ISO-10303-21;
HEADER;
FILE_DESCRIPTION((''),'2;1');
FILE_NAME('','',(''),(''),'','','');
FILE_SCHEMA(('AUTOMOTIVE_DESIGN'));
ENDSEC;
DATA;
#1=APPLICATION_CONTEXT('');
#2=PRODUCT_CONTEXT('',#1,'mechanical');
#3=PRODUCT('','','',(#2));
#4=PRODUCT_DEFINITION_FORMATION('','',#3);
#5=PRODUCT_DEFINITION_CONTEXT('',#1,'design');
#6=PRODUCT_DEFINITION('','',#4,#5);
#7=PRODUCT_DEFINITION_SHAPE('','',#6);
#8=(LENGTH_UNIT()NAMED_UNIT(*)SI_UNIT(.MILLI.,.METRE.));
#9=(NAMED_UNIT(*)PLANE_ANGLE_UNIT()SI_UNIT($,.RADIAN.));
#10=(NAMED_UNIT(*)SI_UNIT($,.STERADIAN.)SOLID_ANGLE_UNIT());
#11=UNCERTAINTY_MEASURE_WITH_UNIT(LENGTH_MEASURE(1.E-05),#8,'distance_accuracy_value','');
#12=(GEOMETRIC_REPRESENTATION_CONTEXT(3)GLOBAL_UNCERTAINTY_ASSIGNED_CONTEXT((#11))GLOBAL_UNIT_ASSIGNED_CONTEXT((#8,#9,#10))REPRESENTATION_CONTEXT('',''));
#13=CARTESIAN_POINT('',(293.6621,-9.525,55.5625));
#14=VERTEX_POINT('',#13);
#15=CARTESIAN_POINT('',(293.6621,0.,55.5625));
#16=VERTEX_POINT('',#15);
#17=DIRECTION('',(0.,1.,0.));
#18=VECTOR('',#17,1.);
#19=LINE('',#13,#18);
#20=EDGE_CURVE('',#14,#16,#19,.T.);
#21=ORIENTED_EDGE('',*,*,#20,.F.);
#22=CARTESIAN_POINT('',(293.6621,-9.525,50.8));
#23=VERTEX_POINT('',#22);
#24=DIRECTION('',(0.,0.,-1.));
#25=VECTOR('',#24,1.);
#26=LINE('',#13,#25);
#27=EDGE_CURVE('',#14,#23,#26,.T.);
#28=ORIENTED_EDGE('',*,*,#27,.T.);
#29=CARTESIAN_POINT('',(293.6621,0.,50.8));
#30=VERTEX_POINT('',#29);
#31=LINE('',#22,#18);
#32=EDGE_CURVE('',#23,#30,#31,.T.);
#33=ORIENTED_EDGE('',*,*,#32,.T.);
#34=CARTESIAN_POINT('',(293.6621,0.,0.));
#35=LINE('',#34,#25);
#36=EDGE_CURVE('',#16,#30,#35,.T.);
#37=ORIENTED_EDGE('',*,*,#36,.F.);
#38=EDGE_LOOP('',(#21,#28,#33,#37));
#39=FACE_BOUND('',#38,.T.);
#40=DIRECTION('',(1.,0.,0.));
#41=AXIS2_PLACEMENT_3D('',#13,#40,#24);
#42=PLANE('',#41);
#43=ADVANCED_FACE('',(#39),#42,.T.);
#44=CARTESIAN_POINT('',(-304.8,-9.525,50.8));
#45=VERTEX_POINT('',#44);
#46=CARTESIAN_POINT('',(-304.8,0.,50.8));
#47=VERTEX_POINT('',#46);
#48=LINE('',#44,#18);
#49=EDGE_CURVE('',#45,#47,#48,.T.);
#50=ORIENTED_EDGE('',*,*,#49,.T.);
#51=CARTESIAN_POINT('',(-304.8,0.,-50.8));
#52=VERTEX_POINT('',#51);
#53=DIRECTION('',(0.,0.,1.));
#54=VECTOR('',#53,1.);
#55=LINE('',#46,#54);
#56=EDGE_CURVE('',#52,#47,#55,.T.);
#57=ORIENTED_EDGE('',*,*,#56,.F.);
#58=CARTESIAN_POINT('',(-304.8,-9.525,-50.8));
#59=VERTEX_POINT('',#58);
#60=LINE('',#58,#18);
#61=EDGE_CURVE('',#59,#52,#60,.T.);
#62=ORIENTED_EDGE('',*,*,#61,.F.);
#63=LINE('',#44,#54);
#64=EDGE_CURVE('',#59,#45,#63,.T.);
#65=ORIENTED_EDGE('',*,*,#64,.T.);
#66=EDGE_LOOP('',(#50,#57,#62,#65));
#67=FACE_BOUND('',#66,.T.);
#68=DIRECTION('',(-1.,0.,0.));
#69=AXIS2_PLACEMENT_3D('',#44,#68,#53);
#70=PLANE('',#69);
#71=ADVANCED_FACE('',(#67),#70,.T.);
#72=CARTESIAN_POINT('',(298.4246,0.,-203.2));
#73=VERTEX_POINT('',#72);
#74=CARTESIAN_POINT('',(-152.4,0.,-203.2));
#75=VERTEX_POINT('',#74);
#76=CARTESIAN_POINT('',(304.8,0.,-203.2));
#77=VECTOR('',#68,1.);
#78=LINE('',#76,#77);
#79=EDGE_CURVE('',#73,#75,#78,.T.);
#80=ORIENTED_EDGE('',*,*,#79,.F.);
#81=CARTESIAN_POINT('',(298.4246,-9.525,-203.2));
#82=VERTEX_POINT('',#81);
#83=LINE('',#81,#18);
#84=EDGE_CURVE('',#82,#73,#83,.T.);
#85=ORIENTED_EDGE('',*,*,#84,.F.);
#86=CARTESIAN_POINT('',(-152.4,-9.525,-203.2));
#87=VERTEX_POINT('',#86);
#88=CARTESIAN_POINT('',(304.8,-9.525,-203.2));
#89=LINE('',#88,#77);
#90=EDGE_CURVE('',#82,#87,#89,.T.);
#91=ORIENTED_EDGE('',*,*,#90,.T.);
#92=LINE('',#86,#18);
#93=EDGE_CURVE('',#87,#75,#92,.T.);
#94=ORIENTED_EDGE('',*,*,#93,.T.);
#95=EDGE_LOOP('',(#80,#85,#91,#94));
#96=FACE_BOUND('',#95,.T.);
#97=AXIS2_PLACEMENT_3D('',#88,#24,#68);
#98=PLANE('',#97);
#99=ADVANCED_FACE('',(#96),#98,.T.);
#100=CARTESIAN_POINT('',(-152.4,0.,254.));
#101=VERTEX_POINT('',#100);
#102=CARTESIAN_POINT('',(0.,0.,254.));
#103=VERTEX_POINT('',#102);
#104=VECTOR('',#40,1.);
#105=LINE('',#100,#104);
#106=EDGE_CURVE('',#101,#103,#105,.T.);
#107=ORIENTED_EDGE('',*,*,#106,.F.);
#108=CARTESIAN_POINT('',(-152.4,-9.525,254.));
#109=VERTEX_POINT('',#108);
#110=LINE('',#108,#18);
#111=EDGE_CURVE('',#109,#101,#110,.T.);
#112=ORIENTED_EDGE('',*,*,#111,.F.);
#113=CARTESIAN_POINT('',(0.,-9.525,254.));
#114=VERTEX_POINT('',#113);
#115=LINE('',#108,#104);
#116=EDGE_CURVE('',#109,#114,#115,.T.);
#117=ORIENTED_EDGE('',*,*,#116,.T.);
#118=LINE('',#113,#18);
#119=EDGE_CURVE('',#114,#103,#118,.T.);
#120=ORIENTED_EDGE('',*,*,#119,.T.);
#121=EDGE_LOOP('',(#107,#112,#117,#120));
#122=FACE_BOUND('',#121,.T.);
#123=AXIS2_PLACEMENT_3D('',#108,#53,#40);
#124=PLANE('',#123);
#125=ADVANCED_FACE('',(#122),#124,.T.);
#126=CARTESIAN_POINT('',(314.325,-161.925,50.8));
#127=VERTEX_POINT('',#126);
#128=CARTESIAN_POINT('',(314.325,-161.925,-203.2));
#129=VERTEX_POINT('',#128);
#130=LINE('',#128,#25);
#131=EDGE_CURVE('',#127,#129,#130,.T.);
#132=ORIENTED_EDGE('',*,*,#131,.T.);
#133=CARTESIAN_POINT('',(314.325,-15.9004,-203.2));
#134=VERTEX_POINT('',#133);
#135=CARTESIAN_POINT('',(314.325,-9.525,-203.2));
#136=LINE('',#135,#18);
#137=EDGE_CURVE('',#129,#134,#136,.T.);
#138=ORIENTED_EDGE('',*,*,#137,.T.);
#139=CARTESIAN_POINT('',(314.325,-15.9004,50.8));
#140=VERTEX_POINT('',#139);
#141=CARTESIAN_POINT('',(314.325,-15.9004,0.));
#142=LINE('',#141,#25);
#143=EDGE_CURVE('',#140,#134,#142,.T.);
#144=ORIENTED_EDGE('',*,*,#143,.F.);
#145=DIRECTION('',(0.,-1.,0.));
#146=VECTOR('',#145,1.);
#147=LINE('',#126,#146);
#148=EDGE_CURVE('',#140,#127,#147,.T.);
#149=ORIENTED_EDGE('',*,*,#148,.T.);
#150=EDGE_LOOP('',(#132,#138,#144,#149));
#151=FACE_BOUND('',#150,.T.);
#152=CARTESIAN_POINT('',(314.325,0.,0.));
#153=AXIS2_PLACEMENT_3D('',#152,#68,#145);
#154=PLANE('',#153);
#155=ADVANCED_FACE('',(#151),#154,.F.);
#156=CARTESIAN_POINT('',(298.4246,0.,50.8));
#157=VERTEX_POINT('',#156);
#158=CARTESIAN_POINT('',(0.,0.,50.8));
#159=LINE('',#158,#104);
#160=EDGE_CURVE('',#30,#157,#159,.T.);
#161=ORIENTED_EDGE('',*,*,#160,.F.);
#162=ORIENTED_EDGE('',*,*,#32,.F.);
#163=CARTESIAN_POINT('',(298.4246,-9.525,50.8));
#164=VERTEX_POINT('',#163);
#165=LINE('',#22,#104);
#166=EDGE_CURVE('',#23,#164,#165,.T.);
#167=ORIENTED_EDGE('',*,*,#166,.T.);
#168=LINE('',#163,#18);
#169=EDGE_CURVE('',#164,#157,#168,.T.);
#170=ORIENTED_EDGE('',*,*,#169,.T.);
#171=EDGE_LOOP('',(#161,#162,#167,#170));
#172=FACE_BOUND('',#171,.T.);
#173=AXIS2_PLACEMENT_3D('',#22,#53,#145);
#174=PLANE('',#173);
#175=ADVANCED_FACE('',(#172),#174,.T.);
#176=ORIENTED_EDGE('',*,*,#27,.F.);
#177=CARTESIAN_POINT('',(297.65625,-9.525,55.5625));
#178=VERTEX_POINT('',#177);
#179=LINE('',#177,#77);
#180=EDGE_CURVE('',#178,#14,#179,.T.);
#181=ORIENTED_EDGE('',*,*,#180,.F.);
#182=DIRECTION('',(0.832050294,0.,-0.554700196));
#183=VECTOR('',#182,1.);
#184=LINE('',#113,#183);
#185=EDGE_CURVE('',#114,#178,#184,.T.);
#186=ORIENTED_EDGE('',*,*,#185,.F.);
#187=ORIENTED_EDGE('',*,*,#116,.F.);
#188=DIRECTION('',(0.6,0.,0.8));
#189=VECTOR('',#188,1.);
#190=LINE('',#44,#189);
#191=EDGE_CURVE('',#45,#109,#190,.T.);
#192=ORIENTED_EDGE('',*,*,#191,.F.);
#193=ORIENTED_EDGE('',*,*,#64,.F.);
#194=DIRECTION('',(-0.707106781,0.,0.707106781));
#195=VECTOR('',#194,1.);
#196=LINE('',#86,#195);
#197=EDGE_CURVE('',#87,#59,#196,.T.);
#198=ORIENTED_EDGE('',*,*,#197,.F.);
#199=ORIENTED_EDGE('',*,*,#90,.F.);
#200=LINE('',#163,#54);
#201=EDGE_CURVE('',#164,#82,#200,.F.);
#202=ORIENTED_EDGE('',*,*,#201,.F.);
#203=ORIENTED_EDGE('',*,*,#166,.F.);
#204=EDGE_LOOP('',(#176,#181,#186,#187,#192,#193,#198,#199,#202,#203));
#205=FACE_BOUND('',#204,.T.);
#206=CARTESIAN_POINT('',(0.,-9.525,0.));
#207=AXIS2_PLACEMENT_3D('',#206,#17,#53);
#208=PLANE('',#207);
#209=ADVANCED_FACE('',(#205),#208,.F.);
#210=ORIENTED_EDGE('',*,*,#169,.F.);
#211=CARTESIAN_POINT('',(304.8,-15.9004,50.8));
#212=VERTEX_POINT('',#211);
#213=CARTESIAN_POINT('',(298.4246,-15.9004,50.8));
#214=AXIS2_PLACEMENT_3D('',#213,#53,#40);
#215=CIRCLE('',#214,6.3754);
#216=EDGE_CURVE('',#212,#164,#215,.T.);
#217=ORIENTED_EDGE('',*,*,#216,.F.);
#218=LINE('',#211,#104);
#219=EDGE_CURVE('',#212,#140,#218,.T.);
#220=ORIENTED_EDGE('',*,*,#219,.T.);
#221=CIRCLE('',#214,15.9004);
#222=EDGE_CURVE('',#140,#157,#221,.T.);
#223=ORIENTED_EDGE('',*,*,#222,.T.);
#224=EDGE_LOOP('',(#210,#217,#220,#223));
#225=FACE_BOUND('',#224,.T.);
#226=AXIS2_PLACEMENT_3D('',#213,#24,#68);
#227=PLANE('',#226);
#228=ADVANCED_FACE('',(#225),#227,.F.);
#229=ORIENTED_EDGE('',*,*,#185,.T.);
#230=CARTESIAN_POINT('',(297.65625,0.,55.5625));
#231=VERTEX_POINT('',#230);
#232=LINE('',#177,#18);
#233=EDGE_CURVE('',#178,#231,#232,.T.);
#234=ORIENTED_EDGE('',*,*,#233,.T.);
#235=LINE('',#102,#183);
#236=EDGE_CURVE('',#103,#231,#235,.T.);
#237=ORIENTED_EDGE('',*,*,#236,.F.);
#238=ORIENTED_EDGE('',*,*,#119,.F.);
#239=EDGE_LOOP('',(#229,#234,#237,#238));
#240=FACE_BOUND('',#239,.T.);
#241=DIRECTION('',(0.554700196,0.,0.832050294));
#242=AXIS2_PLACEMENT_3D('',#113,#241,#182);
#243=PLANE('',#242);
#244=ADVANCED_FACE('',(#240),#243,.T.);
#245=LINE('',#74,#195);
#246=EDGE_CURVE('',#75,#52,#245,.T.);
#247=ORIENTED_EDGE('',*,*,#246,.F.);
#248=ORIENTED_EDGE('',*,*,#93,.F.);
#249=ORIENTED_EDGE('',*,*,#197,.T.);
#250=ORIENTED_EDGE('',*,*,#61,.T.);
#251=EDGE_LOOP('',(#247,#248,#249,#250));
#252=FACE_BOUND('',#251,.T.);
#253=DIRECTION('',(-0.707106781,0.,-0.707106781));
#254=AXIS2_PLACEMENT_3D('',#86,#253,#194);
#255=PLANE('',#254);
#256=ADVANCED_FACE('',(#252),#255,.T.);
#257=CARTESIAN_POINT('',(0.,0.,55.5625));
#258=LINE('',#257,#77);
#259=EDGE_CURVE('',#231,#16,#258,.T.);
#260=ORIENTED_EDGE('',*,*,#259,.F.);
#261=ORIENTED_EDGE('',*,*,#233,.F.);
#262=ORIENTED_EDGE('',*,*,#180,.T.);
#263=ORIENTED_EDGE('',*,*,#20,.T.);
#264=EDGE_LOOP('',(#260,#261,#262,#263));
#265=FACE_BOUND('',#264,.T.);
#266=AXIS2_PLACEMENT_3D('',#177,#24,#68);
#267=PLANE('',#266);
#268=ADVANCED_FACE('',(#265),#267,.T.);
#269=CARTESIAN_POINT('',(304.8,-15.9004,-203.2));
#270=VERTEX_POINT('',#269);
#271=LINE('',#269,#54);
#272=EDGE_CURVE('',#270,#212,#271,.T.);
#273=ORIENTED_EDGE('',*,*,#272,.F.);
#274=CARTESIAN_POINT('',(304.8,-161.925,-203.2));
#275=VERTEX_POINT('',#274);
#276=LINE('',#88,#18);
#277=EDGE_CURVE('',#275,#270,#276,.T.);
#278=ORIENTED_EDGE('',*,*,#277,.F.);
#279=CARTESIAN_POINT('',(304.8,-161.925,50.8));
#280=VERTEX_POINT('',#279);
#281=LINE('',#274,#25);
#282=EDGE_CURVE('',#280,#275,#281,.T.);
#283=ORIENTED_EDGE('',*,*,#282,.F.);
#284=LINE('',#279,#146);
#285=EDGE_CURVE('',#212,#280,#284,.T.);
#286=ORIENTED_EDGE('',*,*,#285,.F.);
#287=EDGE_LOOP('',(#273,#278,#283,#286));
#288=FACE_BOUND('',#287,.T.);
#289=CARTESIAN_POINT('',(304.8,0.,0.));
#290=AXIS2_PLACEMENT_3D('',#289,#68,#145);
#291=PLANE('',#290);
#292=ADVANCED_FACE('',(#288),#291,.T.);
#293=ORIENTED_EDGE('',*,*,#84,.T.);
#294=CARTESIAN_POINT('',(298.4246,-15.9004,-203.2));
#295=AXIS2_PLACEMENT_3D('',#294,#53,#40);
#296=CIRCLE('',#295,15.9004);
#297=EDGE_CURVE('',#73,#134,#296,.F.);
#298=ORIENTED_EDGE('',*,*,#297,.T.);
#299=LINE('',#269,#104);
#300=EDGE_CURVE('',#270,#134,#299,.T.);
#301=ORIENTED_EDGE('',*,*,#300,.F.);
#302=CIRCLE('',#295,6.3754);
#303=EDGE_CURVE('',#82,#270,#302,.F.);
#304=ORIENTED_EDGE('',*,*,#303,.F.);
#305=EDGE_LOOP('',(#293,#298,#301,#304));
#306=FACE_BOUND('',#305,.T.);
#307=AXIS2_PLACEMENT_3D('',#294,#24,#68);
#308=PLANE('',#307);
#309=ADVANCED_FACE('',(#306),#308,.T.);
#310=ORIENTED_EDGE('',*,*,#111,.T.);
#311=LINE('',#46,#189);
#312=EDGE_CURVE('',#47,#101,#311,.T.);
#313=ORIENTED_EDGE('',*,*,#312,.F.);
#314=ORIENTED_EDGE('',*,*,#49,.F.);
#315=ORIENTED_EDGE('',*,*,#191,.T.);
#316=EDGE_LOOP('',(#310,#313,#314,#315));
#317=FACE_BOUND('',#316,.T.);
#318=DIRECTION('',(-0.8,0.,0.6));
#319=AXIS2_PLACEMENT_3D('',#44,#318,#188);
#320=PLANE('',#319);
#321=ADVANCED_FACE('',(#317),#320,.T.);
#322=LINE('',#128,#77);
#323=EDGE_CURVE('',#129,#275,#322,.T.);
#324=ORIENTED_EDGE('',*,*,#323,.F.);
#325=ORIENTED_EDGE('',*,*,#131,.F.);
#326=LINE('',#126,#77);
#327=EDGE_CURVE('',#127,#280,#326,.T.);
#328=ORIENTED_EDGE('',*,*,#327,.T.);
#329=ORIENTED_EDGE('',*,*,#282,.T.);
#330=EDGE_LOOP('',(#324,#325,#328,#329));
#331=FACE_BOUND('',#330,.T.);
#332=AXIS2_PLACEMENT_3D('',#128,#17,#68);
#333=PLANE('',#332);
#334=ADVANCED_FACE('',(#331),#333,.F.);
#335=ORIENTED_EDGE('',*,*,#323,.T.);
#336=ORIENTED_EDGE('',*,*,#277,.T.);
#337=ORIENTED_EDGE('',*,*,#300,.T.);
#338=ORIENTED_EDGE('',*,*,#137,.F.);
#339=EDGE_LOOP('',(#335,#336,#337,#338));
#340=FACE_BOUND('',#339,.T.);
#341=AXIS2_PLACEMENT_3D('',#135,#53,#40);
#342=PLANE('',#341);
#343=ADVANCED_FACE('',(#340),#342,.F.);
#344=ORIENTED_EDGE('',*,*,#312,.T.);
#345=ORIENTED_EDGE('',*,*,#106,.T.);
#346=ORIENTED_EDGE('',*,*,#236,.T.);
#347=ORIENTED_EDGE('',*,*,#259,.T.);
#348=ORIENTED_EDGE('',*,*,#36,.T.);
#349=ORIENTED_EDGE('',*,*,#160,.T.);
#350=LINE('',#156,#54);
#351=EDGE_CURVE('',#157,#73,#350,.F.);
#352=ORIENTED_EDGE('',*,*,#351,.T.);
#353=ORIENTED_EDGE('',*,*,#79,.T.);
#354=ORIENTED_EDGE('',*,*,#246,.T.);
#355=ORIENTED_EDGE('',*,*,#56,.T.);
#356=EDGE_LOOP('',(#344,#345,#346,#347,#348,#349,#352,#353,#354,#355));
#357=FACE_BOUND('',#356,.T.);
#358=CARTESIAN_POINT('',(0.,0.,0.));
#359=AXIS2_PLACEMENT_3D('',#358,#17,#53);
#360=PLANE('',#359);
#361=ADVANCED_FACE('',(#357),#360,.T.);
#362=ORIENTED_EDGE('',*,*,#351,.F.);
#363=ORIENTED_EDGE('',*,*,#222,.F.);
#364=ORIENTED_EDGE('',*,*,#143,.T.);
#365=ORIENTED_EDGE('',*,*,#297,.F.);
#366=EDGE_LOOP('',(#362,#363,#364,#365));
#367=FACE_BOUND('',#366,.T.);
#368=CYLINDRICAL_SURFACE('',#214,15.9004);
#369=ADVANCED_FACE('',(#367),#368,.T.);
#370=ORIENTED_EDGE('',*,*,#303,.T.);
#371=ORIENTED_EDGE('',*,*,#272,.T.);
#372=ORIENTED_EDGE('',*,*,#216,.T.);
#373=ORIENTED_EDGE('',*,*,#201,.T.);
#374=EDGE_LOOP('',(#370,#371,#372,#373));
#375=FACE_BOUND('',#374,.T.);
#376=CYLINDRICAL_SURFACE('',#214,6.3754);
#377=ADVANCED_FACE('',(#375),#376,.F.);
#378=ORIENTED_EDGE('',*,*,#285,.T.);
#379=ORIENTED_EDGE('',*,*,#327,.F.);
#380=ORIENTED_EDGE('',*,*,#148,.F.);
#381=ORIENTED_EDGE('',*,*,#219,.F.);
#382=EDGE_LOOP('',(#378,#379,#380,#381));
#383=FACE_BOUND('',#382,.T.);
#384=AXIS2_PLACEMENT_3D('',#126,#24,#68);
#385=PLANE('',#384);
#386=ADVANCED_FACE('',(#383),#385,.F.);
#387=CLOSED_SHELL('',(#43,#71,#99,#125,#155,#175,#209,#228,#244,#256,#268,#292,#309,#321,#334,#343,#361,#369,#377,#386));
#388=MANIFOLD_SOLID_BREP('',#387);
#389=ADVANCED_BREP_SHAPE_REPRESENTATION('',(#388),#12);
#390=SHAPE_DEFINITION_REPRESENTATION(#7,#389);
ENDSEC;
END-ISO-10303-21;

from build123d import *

# Parameters (mm, degrees)
BASE_FLANGE1_DEPTH            = 9.525
EDGE_FLANGE1_STRIP_W          = 50.8508
EDGE_FLANGE1_STRIP_H          = 9.525
EDGE_FLANGE1_STRIP_CUT_DEPTH  = 254
EDGE_FLANGE1_RELIEF_W         = 55.6133
EDGE_FLANGE1_RELIEF_H         = 4.7625
EDGE_FLANGE1_RELIEF_CUT_DEPTH = 9.525
EDGE_FLANGE1_DEPTH            = 254


# Sheet-metal steps are written as plain solids
with BuildPart() as part:
    # Sketch1 → Base-Flange1 (new body)
    with BuildSketch(Plane(origin=(0, 0, 0), x_dir=(1, 0, 0), z_dir=(0, 1, 0))):
        Polygon((304.8, 50.8), (304.8, 203.2), (-152.4, 203.2), (-304.8, 50.8), (-304.8, -50.8), (-152.4, -254), (0, -254), (304.8, -50.8), align=None)
    extrude(amount=-BASE_FLANGE1_DEPTH)

    # Edge-Flange1 strip (across the edge) → Edge-Flange1 strip cut (cut)
    with BuildSketch(Plane(origin=(304.8, -9.525, -203.2), x_dir=(-1, 0, 0), z_dir=(0, 0, 1))):
        with Locations((-19.05, -4.7625)):
            Rectangle(EDGE_FLANGE1_STRIP_W, EDGE_FLANGE1_STRIP_H)
    extrude(amount=EDGE_FLANGE1_STRIP_CUT_DEPTH, mode=Mode.SUBTRACT)

    # Edge-Flange1 relief (on the sheet) → Edge-Flange1 relief cut (cut)
    with BuildSketch(Plane(origin=(298.4246, -9.525, -203.2), x_dir=(-1, 0, 0), z_dir=(0, -1, 0))):
        with Locations((-23.04415, -256.38125)):
            Rectangle(EDGE_FLANGE1_RELIEF_W, EDGE_FLANGE1_RELIEF_H)
    extrude(amount=-EDGE_FLANGE1_RELIEF_CUT_DEPTH, mode=Mode.SUBTRACT)

    # Edge-Flange1 section (across the edge) → Edge-Flange1 (add)
    with BuildSketch(Plane(origin=(304.8, -9.525, -203.2), x_dir=(-1, 0, 0), z_dir=(0, 0, 1))):
        with BuildLine():
            Line((-9.525, 6.3754), (-9.525, 152.4))
            Line((-9.525, 152.4), (0, 152.4))
            Line((0, 152.4), (0, 6.3754))
            ThreePointArc((0, 6.3754), (1.867311427, 1.867311427), (6.3754, 0))
            Line((6.3754, 0), (6.3754, -9.525))
            ThreePointArc((6.3754, -9.525), (-4.867880664, -4.867880664), (-9.525, 6.3754))
        make_face()
    extrude(amount=EDGE_FLANGE1_DEPTH)


solid = part.part
